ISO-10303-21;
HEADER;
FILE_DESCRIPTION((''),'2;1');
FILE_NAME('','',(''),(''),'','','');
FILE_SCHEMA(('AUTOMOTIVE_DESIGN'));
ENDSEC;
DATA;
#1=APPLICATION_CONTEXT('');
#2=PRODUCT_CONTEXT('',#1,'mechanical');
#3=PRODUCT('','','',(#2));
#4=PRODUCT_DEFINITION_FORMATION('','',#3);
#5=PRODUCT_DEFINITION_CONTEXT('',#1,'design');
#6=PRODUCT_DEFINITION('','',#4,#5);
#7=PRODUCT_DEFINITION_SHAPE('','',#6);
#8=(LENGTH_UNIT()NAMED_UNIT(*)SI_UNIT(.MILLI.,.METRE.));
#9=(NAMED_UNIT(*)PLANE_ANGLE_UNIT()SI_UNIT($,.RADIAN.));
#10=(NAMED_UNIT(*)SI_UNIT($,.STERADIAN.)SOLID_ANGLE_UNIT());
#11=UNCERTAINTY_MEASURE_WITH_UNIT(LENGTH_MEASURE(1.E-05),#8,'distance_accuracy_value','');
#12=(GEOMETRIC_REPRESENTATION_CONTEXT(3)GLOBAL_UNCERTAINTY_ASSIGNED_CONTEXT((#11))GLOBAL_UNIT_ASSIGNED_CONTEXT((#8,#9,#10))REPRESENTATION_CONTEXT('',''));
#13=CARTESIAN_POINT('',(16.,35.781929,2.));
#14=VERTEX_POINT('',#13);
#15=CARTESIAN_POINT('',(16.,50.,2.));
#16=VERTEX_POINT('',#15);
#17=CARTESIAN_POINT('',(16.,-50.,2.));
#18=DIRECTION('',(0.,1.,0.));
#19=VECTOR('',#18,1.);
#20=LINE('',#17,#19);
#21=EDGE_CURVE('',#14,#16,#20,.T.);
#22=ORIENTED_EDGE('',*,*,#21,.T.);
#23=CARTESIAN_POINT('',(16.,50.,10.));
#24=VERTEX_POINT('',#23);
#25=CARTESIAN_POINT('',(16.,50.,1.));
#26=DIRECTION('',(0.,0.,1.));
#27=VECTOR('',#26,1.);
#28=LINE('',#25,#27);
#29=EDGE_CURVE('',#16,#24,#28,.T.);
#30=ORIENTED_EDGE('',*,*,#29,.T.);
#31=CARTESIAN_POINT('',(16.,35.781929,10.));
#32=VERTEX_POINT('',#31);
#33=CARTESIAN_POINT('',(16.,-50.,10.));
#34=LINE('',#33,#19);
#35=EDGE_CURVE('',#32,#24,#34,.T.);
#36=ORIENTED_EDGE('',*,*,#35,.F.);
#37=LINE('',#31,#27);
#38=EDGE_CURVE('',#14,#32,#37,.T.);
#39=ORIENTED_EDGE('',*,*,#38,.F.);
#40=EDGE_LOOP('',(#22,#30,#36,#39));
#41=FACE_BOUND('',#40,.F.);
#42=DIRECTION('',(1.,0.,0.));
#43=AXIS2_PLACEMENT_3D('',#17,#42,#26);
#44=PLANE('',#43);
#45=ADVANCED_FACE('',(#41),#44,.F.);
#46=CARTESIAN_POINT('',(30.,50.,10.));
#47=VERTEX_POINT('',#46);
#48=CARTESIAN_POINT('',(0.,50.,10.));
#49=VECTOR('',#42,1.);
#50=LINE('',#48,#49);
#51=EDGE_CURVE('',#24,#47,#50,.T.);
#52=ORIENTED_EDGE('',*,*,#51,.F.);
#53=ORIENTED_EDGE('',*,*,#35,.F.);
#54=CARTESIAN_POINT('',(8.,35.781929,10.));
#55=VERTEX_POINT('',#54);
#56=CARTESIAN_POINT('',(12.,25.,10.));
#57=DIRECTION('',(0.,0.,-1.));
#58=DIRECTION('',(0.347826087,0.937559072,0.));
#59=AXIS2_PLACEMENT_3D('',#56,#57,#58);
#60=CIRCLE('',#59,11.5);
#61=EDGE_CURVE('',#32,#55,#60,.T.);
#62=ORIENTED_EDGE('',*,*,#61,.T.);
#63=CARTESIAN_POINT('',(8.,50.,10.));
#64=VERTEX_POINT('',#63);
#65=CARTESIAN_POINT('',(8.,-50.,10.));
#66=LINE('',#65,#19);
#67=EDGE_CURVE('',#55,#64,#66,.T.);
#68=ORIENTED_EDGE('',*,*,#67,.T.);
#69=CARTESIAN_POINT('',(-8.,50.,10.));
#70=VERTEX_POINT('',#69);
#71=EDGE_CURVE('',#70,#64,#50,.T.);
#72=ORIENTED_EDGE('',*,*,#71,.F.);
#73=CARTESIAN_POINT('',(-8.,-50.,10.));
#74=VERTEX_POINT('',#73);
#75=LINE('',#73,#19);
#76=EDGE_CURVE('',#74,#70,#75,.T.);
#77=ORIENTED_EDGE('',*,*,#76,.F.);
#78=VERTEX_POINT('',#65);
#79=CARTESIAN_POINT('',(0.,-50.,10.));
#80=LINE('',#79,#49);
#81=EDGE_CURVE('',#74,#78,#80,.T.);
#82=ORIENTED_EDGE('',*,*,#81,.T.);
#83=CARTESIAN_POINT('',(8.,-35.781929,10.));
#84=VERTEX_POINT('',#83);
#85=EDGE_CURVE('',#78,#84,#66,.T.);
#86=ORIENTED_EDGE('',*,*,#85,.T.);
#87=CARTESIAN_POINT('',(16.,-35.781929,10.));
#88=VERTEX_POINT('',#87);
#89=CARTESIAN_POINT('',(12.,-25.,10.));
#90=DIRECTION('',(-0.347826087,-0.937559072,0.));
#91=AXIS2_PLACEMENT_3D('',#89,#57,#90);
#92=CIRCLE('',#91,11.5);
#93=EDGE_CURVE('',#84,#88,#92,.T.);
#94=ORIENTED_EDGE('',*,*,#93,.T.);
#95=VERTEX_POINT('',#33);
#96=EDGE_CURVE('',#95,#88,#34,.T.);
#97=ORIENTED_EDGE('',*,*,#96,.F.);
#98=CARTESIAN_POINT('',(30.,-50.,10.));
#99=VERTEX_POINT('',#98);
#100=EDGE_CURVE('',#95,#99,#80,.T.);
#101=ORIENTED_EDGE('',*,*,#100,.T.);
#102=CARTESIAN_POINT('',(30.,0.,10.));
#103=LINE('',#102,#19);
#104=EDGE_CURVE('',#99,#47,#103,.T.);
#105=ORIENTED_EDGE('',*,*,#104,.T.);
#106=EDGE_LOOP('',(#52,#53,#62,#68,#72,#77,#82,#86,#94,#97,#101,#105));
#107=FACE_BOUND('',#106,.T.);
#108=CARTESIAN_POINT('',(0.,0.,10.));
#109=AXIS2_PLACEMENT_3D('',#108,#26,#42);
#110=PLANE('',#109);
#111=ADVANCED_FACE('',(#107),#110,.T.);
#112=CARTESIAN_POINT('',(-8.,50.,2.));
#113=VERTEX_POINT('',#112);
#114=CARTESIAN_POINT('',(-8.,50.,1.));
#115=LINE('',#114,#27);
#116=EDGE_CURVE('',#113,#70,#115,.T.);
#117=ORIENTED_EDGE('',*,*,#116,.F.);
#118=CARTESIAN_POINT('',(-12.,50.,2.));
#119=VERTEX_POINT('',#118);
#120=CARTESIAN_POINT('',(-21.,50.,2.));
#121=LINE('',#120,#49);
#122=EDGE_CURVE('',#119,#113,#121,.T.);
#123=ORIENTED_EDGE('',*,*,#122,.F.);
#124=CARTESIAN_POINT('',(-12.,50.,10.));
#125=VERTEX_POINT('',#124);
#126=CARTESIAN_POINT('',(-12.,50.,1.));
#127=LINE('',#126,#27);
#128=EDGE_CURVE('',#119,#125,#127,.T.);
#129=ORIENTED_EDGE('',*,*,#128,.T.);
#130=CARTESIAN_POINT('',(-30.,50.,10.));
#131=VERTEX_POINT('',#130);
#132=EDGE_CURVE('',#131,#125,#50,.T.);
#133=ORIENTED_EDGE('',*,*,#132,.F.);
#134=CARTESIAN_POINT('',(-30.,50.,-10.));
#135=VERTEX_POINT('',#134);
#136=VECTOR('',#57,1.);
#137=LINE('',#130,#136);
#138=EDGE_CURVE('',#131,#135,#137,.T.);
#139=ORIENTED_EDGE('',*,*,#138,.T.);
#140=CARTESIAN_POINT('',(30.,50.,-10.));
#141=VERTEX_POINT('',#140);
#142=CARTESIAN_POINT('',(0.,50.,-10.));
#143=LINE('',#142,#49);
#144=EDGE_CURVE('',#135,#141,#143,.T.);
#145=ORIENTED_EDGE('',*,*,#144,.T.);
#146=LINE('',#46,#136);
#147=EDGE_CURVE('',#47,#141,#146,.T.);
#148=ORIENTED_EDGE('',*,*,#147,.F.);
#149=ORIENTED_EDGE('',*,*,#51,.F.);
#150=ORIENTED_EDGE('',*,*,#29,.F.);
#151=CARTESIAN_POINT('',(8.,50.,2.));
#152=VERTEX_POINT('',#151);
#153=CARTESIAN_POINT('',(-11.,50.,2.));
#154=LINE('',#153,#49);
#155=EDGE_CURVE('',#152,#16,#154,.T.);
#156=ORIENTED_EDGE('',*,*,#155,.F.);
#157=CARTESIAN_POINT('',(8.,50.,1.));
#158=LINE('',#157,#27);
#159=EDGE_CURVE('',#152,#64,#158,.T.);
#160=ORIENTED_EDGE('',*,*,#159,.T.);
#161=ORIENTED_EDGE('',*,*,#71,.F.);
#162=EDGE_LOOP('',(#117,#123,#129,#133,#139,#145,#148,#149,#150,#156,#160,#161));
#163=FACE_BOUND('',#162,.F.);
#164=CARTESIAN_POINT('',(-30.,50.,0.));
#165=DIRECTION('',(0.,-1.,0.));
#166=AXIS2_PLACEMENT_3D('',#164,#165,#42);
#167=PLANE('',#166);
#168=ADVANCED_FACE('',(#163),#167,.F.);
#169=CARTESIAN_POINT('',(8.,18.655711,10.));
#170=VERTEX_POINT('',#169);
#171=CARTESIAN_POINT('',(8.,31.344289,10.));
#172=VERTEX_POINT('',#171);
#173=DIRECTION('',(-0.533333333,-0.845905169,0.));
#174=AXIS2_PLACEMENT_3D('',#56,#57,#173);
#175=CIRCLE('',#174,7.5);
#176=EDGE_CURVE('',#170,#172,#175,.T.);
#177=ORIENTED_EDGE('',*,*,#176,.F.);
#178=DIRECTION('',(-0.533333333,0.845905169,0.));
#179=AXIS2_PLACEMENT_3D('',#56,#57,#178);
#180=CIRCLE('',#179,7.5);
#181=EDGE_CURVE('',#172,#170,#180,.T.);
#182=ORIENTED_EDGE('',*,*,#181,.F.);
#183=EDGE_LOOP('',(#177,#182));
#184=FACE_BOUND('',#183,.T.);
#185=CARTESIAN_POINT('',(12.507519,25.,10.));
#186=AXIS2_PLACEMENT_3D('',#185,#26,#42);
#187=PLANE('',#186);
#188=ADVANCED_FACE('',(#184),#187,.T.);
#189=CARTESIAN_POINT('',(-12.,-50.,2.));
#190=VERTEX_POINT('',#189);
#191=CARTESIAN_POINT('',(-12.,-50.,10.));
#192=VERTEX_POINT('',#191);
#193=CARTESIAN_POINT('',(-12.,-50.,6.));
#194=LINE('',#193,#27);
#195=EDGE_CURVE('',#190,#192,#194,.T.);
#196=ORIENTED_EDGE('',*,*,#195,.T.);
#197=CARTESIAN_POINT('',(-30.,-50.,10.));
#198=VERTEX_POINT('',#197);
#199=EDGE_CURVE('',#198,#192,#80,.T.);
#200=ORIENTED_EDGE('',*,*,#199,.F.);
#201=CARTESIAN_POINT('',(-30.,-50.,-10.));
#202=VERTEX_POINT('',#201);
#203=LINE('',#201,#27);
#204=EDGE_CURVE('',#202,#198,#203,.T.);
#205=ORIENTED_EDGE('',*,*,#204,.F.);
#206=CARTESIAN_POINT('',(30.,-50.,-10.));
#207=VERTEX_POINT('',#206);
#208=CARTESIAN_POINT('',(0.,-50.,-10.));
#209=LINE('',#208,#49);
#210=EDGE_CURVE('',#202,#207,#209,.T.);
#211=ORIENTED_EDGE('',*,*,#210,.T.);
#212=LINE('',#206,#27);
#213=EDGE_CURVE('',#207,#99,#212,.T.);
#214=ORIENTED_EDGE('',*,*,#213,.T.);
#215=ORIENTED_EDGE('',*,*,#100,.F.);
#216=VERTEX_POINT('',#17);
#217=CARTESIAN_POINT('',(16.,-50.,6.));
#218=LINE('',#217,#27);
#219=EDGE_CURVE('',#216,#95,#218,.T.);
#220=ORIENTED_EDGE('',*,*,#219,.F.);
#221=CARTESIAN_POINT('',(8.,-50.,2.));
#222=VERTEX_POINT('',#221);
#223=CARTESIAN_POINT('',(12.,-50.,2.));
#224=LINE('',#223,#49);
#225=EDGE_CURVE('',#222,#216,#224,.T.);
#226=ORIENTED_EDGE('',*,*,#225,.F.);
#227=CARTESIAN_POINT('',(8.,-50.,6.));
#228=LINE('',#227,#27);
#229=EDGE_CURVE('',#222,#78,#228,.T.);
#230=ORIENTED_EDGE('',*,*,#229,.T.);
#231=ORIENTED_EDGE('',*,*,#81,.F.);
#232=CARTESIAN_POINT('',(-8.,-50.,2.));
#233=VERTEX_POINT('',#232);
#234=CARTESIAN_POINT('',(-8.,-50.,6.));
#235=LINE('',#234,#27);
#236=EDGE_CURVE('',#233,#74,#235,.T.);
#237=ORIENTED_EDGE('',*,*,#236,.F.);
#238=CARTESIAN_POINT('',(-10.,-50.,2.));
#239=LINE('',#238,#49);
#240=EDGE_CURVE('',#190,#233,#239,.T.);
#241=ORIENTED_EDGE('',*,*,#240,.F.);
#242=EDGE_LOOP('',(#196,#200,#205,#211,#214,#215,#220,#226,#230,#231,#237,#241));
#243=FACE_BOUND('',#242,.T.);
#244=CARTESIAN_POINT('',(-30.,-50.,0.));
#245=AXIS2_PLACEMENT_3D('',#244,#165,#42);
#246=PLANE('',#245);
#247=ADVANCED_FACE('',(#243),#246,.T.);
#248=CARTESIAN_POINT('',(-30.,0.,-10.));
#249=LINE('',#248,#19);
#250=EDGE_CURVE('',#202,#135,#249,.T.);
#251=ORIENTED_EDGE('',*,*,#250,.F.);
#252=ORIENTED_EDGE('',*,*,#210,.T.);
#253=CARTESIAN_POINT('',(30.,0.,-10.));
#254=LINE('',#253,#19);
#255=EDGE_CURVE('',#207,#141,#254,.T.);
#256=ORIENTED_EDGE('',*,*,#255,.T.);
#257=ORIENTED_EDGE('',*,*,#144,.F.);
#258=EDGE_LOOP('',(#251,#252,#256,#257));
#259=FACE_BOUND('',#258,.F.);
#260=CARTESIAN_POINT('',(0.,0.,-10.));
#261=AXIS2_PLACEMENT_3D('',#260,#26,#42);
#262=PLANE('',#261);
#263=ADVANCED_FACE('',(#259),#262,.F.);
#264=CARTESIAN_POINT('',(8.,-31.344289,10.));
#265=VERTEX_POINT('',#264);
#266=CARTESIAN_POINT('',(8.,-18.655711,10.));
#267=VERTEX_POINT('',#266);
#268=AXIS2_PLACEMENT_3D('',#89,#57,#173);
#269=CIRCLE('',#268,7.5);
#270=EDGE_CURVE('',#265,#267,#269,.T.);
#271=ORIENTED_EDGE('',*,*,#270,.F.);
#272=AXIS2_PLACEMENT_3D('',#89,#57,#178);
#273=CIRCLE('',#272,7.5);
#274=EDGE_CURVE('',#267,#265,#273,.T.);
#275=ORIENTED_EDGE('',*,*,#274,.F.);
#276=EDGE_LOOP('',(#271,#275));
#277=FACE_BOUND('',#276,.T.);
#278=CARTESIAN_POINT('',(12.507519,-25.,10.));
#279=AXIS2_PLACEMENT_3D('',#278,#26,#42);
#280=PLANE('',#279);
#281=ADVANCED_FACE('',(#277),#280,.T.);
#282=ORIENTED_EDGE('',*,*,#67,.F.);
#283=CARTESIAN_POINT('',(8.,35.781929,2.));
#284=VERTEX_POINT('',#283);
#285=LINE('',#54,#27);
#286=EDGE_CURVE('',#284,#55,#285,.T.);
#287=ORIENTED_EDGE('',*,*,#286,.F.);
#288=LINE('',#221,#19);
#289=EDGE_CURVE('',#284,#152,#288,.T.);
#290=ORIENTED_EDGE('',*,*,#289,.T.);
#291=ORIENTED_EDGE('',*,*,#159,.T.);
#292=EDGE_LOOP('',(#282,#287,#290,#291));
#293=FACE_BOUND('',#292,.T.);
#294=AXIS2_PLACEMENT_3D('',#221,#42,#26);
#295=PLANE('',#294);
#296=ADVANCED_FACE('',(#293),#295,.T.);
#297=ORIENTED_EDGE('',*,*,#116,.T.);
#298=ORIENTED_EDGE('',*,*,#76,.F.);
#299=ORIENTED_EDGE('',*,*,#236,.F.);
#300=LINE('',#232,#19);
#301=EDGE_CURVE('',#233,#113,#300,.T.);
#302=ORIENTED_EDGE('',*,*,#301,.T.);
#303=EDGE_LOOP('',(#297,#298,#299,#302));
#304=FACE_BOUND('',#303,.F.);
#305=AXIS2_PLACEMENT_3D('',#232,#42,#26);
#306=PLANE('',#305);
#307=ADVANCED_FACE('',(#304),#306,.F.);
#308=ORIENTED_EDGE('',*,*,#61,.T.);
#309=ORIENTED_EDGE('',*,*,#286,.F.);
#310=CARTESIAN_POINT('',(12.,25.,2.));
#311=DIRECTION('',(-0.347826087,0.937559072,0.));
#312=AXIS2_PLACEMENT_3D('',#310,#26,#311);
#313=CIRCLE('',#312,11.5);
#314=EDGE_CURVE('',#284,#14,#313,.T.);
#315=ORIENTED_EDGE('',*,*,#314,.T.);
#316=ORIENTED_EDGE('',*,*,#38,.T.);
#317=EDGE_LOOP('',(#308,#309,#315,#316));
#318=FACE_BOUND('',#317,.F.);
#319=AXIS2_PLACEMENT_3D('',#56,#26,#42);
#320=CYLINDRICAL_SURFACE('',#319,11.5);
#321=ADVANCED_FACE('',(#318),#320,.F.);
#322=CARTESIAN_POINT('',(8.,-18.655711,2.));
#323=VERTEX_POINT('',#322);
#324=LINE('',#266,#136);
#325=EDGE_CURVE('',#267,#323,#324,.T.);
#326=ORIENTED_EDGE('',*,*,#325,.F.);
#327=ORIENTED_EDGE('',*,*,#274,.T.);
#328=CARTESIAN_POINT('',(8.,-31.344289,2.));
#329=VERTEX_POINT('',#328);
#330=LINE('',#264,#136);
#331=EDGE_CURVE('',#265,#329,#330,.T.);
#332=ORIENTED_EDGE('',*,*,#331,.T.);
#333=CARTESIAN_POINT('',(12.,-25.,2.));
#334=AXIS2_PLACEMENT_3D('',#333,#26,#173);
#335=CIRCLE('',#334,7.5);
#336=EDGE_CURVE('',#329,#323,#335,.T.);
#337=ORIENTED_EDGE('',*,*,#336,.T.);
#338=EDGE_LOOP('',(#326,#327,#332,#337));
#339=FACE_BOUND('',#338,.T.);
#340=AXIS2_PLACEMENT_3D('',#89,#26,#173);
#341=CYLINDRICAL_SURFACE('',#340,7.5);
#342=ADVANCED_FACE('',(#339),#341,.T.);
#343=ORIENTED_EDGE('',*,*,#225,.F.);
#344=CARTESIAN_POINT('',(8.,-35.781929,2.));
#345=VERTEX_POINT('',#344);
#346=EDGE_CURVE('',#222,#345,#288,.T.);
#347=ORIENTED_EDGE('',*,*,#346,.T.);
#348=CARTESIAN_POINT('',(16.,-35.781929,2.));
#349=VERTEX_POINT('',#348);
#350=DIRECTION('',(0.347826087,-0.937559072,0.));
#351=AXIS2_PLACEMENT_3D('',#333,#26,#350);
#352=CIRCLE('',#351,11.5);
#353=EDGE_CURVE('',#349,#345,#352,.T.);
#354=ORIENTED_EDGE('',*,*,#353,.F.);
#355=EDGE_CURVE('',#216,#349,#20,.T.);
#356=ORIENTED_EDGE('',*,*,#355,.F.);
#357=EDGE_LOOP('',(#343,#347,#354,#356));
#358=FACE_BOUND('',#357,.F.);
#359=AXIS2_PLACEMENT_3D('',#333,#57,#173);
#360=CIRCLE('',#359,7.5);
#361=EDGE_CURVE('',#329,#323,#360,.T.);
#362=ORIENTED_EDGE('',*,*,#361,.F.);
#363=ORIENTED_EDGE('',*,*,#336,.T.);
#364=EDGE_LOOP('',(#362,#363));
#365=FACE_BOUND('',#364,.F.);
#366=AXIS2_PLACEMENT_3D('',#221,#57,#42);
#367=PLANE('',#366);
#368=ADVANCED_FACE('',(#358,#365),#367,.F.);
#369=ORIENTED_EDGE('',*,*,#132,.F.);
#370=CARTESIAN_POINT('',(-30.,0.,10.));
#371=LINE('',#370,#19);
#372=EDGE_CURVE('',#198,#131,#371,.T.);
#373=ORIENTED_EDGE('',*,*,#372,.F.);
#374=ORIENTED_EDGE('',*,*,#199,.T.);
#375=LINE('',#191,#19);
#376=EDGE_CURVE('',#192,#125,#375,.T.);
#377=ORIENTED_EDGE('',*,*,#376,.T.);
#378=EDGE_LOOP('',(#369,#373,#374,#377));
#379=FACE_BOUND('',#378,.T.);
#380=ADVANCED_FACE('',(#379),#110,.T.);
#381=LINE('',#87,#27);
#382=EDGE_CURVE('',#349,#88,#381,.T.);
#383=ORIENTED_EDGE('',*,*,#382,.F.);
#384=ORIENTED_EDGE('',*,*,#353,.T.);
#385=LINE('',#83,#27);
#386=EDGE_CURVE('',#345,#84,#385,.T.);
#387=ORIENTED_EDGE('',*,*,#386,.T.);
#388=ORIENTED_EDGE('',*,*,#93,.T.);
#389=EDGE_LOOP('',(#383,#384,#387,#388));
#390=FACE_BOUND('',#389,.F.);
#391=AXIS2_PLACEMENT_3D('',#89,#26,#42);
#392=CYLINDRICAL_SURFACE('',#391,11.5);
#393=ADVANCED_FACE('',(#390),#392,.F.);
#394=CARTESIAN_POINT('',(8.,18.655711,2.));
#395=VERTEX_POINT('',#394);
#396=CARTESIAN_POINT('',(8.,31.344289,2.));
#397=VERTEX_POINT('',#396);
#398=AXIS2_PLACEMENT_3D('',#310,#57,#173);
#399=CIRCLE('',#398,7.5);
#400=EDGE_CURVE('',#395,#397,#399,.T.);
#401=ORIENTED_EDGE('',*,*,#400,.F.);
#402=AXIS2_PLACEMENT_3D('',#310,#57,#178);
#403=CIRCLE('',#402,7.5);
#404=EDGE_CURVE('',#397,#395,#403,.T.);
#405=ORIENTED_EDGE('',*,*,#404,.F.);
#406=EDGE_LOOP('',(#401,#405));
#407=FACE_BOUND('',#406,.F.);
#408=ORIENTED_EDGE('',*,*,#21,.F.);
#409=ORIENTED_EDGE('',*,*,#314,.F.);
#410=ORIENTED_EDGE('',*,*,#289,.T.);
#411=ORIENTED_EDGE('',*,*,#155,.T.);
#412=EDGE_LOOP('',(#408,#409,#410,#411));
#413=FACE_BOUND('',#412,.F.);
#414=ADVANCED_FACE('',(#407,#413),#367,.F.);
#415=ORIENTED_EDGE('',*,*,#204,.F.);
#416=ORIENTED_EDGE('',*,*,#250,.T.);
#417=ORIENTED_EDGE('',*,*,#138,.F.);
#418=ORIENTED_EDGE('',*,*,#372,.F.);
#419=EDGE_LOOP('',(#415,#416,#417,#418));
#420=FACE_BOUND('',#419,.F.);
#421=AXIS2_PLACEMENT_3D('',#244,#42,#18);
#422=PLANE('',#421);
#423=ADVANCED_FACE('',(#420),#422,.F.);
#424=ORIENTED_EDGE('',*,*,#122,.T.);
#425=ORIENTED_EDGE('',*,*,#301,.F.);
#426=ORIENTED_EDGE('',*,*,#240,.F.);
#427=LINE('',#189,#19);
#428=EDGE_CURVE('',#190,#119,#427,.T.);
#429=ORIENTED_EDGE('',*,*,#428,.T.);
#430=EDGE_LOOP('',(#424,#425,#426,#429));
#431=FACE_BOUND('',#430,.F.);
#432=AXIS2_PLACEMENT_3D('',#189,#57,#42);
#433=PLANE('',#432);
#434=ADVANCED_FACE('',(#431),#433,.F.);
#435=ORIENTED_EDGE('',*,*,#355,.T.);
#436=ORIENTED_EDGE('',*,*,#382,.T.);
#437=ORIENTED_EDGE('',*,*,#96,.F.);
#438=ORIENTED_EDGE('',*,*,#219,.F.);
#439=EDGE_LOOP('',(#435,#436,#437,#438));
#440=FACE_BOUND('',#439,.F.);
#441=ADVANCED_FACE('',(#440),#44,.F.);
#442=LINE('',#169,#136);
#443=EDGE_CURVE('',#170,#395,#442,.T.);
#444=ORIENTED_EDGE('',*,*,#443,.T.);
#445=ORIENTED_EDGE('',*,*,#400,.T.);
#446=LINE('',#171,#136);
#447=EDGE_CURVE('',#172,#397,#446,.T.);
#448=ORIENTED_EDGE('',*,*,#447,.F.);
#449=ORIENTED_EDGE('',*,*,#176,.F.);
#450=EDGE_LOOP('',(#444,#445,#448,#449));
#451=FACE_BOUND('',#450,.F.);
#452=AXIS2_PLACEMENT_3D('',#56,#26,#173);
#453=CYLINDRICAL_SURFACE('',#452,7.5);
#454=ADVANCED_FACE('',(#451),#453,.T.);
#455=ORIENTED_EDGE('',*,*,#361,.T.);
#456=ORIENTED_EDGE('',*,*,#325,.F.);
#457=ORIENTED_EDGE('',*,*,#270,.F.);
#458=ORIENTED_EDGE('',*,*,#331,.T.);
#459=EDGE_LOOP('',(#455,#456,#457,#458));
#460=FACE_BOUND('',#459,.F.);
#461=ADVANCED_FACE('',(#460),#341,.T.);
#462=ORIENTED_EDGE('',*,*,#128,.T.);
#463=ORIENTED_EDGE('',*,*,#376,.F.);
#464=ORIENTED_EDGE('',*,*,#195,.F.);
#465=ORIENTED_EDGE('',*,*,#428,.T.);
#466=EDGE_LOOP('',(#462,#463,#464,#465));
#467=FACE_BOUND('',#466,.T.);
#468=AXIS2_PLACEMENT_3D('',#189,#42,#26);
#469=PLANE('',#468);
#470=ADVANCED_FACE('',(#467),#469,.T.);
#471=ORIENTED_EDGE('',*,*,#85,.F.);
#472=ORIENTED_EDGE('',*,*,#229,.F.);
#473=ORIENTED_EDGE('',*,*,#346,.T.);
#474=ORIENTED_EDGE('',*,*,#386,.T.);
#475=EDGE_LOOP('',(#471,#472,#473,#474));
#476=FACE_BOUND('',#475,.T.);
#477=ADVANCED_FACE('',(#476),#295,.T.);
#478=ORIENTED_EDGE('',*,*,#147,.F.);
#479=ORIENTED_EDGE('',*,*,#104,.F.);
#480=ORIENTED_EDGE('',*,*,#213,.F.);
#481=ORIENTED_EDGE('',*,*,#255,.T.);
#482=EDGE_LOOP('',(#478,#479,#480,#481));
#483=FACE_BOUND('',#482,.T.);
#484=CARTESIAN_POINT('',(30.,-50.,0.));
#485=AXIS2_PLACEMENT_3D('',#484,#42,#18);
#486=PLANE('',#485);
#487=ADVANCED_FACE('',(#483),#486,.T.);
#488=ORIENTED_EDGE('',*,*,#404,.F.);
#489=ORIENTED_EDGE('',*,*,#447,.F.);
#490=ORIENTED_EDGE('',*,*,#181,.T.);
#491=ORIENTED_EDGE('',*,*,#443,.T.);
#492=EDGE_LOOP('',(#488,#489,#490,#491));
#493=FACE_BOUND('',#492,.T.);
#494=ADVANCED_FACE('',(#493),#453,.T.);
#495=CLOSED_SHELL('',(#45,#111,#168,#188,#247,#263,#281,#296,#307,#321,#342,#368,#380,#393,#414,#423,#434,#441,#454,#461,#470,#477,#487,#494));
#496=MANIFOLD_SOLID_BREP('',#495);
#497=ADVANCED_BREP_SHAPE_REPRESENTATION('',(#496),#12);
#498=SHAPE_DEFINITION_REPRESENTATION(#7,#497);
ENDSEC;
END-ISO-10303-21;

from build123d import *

# Parameters (mm, degrees)
F0_W      = 60
F0_H      = 100
F1_DEPTH  = 10
F2_W      = 4
F2_H      = 8
F2_W_2    = 8
F3_DEPTH  = 100.001
F5_W      = 8
F5_H      = 8
F6_DEPTH  = 25
F8_DEPTH  = 8
F10_DEPTH = 8


# Not quite as in the source:
# - a feature names something its author has since deleted; it is built from what else it names


with BuildPart() as f1:
    # F0 (on Top) → F1 (new body, symmetric)
    with BuildSketch(Plane.XY):
        Rectangle(F0_W, F0_H)
    extrude(amount=F1_DEPTH, both=True)

    # F2 (on face) → F3 (cut, through all)
    with BuildSketch(Plane.XZ.offset(50)):
        with Locations((-10, 6)):
            Rectangle(F2_W, F2_H)
        with Locations((12, 6)):
            Rectangle(F2_W_2, F2_H)
    extrude(amount=-F3_DEPTH, mode=Mode.SUBTRACT)

    # F5 (on Front) → F6 (join, symmetric)
    with BuildSketch(Plane.XZ):
        with Locations((12, 6)):
            Rectangle(F5_W, F5_H)
    extrude(amount=F6_DEPTH, both=True)

    # F7 (on face) → F8 (cut, through all)
    with BuildSketch(Plane.XY.offset(10)):
        with BuildLine():
            ThreePointArc((8, 35.7819293264), (0.5, 25), (8, 14.2180706736))
            Line((8, 14.2180706736), (8, 18.6557112298))
            ThreePointArc((8, 18.6557112298), (4.5, 25), (8, 31.3442887702))
            Line((8, 31.3442887702), (8, 35.7819293264))
        make_face()
        with BuildLine():
            ThreePointArc((8, -31.3442887702), (4.5, -25), (8, -18.6557112298))
            Line((8, -18.6557112298), (8, -14.2180706736))
            ThreePointArc((8, -14.2180706736), (0.5, -25), (8, -35.7819293264))
            Line((8, -35.7819293264), (8, -31.3442887702))
        make_face()
        with BuildLine():
            Line((8, 18.6557112298), (8, 14.2180706736))
            ThreePointArc((8, 14.2180706736), (18.5669627683, 15.5593962058), (23.5, 25))
            ThreePointArc((23.5, 25), (18.5669627683, 34.4406037942), (8, 35.7819293264))
            Line((8, 35.7819293264), (8, 31.3442887702))
            ThreePointArc((8, 31.3442887702), (15.6228441865, 31.5669627683), (19.5, 25))
            ThreePointArc((19.5, 25), (15.6228441865, 18.4330372317), (8, 18.6557112298))
        make_face()
        with BuildLine():
            ThreePointArc((8, -18.6557112298), (15.6228441865, -18.4330372317), (19.5, -25))
            ThreePointArc((19.5, -25), (15.6228441865, -31.5669627683), (8, -31.3442887702))
            Line((8, -31.3442887702), (8, -35.7819293264))
            ThreePointArc((8, -35.7819293264), (18.5669627683, -34.4406037942), (23.5, -25))
            ThreePointArc((23.5, -25), (18.5669627683, -15.5593962058), (8, -14.2180706736))
            Line((8, -14.2180706736), (8, -18.6557112298))
        make_face()
    extrude(amount=-F8_DEPTH, mode=Mode.SUBTRACT)

    # F9 (on face) → F10 (join, through all)
    with BuildSketch(Plane.XY.offset(10)):
        with BuildLine():
            ThreePointArc((8, -31.3442887702), (15.6228441865, -31.5669627683), (19.5, -25))
            ThreePointArc((19.5, -25), (15.6228441865, -18.4330372317), (8, -18.6557112298))
            Line((8, -18.6557112298), (8, -31.3442887702))
        make_face()
        with BuildLine():
            Line((8, 31.3442887702), (8, 18.6557112298))
            ThreePointArc((8, 18.6557112298), (15.6228441865, 18.4330372317), (19.5, 25))
            ThreePointArc((19.5, 25), (15.6228441865, 31.5669627683), (8, 31.3442887702))
        make_face()
        with BuildLine():
            ThreePointArc((8, 31.3442887702), (4.5, 25), (8, 18.6557112298))
            Line((8, 18.6557112298), (8, 31.3442887702))
        make_face()
    extrude(amount=-F10_DEPTH)


solid = f1.part
